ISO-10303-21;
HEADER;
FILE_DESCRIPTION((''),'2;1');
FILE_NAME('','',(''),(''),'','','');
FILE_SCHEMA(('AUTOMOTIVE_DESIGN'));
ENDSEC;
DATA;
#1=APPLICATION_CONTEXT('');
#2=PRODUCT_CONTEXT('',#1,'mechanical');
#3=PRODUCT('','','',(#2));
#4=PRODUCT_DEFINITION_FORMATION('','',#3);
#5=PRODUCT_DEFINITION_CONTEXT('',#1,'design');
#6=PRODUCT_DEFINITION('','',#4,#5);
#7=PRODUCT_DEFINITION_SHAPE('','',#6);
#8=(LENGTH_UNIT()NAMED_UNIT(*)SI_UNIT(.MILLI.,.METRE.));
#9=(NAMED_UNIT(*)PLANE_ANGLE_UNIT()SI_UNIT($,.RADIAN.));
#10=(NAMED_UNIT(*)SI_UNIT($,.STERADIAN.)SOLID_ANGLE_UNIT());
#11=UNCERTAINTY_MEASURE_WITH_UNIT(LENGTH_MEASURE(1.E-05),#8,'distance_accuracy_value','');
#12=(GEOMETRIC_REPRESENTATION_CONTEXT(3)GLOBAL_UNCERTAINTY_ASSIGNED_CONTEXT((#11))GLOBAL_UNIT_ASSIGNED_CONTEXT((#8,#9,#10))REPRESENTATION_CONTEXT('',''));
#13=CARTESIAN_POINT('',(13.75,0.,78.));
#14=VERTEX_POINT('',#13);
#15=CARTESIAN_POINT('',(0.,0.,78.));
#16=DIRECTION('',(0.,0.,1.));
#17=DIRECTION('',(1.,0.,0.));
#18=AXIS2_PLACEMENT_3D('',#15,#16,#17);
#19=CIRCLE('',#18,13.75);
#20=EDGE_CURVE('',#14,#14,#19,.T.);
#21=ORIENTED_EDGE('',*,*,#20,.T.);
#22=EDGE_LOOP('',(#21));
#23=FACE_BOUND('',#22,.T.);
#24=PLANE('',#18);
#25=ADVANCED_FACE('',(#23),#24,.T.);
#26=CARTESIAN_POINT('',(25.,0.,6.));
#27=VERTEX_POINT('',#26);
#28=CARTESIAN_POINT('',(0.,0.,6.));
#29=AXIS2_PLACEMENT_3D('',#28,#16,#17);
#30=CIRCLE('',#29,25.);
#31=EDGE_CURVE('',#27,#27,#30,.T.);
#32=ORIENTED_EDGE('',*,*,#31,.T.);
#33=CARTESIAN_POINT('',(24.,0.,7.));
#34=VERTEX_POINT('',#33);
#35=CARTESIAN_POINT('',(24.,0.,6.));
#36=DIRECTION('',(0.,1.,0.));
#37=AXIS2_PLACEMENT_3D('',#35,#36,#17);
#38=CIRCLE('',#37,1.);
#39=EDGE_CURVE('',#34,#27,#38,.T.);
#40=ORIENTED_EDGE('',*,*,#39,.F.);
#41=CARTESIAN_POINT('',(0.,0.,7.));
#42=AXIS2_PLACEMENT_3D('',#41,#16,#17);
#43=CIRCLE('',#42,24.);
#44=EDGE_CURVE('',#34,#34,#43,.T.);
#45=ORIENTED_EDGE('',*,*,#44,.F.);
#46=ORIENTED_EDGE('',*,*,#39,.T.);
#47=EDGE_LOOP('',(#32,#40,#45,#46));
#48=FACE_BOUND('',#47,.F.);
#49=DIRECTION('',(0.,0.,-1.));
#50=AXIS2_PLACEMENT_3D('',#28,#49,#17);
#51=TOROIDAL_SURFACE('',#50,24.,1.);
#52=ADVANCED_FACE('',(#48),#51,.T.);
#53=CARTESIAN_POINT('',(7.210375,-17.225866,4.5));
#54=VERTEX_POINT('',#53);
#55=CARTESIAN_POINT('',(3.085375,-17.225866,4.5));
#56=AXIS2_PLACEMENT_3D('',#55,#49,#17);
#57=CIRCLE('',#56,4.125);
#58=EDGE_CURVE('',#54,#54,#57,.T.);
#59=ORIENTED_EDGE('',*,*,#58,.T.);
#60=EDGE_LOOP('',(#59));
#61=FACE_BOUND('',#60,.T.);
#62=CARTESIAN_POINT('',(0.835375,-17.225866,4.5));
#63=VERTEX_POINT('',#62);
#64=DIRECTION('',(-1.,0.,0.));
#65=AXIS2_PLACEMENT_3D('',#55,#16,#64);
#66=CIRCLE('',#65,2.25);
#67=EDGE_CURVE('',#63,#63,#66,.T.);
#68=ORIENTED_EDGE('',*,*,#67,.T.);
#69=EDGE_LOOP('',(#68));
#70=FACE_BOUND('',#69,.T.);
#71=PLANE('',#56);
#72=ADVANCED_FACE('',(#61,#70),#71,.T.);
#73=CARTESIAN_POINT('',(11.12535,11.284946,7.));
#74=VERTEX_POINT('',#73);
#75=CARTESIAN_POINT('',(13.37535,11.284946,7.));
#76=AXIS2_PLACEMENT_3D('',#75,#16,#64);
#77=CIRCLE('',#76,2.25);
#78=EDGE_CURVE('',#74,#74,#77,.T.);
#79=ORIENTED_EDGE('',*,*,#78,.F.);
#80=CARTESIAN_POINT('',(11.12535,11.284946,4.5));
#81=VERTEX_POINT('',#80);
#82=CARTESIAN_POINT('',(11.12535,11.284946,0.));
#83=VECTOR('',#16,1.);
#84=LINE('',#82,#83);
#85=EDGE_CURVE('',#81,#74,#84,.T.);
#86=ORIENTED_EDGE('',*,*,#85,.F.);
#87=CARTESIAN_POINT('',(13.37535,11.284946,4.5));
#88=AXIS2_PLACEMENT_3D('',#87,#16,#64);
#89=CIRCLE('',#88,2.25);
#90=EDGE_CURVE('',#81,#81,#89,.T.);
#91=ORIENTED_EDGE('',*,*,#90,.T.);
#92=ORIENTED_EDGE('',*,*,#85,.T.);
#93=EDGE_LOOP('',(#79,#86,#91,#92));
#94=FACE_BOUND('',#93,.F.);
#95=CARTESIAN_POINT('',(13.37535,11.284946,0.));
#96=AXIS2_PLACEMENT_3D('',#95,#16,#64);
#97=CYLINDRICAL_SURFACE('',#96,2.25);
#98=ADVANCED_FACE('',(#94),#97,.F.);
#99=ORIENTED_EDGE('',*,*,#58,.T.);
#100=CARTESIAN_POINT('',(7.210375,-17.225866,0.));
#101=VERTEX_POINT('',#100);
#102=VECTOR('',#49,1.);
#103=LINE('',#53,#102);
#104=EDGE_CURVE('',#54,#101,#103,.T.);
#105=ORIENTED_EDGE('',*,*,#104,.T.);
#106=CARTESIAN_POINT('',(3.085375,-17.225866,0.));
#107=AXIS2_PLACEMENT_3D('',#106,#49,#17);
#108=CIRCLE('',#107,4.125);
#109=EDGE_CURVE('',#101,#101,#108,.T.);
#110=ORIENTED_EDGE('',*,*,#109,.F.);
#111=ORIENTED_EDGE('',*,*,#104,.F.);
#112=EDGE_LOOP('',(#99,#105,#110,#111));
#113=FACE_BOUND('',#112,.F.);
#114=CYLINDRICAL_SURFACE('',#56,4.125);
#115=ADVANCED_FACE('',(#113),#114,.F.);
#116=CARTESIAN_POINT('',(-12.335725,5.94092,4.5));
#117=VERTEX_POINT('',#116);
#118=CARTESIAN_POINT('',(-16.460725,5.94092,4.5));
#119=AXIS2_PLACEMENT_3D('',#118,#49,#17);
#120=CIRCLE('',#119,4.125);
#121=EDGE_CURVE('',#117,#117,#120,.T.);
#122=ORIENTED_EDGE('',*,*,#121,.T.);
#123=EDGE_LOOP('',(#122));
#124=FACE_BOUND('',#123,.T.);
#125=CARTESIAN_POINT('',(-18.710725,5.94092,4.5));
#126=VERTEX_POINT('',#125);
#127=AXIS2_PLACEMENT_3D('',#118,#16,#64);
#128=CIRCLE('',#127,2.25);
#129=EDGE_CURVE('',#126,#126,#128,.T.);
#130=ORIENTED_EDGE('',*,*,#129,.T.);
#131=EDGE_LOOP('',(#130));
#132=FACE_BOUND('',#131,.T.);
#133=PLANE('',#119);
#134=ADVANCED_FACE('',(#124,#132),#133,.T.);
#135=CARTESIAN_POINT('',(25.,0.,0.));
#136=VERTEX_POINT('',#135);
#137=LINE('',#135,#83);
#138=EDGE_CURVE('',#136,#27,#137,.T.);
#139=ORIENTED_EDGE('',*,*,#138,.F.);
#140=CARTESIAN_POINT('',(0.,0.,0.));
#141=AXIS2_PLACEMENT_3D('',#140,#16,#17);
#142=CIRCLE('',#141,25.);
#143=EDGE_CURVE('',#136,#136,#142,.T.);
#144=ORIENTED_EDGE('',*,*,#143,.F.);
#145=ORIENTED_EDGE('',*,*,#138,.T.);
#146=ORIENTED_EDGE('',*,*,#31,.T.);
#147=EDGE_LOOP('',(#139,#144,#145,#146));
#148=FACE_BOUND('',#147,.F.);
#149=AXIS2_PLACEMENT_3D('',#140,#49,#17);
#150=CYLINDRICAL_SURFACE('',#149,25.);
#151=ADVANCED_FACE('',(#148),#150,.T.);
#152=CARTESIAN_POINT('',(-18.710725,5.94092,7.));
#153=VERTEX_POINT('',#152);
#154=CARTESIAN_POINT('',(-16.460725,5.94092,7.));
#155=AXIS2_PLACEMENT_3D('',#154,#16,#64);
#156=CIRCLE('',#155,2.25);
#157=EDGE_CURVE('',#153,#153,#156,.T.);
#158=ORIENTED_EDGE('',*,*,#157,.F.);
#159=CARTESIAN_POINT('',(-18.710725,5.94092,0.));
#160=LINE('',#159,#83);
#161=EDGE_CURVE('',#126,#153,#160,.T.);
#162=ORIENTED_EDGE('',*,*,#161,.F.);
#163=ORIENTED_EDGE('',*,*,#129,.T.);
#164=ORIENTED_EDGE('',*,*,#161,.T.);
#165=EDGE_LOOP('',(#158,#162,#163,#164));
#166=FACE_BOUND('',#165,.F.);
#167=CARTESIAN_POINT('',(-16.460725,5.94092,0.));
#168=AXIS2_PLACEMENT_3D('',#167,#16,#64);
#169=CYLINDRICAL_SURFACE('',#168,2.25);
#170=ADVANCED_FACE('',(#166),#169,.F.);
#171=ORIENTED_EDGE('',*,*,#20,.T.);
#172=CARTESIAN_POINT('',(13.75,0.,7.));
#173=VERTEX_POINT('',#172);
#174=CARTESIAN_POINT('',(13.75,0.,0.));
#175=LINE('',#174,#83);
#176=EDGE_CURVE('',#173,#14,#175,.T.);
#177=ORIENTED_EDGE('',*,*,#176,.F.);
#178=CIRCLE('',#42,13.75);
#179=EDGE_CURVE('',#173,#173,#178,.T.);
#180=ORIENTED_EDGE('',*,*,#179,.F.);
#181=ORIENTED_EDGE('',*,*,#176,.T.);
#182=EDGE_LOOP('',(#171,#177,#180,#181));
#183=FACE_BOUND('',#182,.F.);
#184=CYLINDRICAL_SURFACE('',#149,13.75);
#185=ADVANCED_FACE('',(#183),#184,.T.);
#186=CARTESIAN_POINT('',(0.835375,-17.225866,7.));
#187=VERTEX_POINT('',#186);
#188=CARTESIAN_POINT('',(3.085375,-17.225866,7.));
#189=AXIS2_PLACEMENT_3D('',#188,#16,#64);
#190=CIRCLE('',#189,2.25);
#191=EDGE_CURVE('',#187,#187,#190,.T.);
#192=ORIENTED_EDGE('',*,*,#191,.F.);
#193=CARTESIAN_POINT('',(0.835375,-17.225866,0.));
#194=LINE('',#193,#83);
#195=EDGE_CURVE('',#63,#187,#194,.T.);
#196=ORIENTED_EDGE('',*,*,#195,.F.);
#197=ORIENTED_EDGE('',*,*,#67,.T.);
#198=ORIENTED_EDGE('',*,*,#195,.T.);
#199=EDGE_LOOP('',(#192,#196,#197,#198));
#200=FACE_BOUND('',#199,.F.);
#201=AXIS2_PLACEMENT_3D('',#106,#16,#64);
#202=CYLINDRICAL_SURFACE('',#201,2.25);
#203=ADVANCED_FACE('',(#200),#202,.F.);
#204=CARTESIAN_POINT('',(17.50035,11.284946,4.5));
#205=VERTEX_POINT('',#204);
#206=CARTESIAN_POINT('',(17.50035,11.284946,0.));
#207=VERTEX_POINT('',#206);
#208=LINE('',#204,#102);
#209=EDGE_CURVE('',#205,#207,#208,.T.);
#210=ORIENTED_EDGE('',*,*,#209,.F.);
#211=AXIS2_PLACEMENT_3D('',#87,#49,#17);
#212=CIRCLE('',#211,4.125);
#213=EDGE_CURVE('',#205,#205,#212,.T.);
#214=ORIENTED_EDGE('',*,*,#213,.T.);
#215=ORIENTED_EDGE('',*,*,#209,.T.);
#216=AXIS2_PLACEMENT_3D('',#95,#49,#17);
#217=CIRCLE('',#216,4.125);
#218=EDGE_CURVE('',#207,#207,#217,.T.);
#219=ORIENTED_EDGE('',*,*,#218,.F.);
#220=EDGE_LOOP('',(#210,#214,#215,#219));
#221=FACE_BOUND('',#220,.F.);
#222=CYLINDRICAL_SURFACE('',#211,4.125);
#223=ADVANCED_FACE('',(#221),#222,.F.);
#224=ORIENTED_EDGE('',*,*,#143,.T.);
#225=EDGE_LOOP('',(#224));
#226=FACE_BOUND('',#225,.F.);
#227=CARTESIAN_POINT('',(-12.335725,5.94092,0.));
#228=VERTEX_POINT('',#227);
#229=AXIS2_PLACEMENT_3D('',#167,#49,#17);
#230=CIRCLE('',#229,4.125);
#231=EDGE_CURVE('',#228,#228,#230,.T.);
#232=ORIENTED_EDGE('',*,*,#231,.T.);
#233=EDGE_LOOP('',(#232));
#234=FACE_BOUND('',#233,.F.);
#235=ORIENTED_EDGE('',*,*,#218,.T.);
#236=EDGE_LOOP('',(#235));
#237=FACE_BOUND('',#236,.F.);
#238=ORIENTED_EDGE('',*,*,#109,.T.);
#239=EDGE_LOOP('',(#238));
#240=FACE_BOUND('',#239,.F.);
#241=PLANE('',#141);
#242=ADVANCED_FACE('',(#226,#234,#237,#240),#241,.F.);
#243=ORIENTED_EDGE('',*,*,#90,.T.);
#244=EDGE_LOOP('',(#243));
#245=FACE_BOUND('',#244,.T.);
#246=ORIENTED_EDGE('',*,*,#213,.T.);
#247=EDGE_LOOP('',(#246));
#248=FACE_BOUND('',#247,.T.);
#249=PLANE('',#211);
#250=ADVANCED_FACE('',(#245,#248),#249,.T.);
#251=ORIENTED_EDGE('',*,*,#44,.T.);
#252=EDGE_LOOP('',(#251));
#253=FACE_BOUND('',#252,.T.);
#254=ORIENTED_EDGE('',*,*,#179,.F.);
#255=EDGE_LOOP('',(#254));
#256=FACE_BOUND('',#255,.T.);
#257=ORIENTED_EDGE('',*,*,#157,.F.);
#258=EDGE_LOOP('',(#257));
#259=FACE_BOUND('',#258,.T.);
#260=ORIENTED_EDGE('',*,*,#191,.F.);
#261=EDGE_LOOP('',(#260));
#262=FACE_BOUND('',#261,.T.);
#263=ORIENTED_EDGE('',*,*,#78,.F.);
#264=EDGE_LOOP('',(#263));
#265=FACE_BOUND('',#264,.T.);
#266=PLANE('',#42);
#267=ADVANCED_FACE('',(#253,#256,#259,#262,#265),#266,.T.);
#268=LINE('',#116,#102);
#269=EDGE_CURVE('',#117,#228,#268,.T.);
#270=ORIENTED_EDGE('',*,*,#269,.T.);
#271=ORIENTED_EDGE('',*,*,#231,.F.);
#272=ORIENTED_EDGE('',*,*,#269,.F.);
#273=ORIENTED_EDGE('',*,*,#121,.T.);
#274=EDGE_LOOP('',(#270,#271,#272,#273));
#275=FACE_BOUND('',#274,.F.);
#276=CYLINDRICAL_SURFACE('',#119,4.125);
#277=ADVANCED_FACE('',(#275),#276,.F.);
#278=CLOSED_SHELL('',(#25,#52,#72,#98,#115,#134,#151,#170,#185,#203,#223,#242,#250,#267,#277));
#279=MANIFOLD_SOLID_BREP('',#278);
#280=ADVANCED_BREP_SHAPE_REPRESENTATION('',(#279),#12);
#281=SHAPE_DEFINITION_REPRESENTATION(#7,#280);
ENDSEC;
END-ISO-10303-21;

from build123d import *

# Parameters (mm, degrees)
F0_R           = 25
F0_R_2         = 13.75
F1_DEPTH       = 7
F2_DEPTH       = 78
F3_D           = 4.5
F3_CBORE_D     = 8.25
F3_CBORE_DEPTH = 4.5
F4_R           = 1


with BuildPart() as f1:
    # F0 (on Top) → F1 (new body)
    with BuildSketch(Plane.XY):
        Circle(F0_R)
        Circle(F0_R_2, mode=Mode.SUBTRACT)
    extrude(amount=F1_DEPTH)

    # F0 (on Top) → F2 (join)
    with BuildSketch(Plane.XY):
        Circle(F0_R_2)
    extrude(amount=F2_DEPTH)

    # F3 (through all)
    with Locations(Plane(origin=(0, 0, 0), x_dir=(1, 0, 0), z_dir=(0, 0, -1))):
        with Locations((3.0853754045, 17.2258659757), (13.3753498349, -11.2849464684), (-16.4607252394, -5.9409195073)):
            CounterBoreHole(F3_D / 2, F3_CBORE_D / 2, F3_CBORE_DEPTH)

    # F4
    f4_edges = [f1.edges().sort_by_distance(p)[0] for p in [
        (-25, 0, 7),
    ]]
    fillet(f4_edges, radius=F4_R)


solid = f1.part
